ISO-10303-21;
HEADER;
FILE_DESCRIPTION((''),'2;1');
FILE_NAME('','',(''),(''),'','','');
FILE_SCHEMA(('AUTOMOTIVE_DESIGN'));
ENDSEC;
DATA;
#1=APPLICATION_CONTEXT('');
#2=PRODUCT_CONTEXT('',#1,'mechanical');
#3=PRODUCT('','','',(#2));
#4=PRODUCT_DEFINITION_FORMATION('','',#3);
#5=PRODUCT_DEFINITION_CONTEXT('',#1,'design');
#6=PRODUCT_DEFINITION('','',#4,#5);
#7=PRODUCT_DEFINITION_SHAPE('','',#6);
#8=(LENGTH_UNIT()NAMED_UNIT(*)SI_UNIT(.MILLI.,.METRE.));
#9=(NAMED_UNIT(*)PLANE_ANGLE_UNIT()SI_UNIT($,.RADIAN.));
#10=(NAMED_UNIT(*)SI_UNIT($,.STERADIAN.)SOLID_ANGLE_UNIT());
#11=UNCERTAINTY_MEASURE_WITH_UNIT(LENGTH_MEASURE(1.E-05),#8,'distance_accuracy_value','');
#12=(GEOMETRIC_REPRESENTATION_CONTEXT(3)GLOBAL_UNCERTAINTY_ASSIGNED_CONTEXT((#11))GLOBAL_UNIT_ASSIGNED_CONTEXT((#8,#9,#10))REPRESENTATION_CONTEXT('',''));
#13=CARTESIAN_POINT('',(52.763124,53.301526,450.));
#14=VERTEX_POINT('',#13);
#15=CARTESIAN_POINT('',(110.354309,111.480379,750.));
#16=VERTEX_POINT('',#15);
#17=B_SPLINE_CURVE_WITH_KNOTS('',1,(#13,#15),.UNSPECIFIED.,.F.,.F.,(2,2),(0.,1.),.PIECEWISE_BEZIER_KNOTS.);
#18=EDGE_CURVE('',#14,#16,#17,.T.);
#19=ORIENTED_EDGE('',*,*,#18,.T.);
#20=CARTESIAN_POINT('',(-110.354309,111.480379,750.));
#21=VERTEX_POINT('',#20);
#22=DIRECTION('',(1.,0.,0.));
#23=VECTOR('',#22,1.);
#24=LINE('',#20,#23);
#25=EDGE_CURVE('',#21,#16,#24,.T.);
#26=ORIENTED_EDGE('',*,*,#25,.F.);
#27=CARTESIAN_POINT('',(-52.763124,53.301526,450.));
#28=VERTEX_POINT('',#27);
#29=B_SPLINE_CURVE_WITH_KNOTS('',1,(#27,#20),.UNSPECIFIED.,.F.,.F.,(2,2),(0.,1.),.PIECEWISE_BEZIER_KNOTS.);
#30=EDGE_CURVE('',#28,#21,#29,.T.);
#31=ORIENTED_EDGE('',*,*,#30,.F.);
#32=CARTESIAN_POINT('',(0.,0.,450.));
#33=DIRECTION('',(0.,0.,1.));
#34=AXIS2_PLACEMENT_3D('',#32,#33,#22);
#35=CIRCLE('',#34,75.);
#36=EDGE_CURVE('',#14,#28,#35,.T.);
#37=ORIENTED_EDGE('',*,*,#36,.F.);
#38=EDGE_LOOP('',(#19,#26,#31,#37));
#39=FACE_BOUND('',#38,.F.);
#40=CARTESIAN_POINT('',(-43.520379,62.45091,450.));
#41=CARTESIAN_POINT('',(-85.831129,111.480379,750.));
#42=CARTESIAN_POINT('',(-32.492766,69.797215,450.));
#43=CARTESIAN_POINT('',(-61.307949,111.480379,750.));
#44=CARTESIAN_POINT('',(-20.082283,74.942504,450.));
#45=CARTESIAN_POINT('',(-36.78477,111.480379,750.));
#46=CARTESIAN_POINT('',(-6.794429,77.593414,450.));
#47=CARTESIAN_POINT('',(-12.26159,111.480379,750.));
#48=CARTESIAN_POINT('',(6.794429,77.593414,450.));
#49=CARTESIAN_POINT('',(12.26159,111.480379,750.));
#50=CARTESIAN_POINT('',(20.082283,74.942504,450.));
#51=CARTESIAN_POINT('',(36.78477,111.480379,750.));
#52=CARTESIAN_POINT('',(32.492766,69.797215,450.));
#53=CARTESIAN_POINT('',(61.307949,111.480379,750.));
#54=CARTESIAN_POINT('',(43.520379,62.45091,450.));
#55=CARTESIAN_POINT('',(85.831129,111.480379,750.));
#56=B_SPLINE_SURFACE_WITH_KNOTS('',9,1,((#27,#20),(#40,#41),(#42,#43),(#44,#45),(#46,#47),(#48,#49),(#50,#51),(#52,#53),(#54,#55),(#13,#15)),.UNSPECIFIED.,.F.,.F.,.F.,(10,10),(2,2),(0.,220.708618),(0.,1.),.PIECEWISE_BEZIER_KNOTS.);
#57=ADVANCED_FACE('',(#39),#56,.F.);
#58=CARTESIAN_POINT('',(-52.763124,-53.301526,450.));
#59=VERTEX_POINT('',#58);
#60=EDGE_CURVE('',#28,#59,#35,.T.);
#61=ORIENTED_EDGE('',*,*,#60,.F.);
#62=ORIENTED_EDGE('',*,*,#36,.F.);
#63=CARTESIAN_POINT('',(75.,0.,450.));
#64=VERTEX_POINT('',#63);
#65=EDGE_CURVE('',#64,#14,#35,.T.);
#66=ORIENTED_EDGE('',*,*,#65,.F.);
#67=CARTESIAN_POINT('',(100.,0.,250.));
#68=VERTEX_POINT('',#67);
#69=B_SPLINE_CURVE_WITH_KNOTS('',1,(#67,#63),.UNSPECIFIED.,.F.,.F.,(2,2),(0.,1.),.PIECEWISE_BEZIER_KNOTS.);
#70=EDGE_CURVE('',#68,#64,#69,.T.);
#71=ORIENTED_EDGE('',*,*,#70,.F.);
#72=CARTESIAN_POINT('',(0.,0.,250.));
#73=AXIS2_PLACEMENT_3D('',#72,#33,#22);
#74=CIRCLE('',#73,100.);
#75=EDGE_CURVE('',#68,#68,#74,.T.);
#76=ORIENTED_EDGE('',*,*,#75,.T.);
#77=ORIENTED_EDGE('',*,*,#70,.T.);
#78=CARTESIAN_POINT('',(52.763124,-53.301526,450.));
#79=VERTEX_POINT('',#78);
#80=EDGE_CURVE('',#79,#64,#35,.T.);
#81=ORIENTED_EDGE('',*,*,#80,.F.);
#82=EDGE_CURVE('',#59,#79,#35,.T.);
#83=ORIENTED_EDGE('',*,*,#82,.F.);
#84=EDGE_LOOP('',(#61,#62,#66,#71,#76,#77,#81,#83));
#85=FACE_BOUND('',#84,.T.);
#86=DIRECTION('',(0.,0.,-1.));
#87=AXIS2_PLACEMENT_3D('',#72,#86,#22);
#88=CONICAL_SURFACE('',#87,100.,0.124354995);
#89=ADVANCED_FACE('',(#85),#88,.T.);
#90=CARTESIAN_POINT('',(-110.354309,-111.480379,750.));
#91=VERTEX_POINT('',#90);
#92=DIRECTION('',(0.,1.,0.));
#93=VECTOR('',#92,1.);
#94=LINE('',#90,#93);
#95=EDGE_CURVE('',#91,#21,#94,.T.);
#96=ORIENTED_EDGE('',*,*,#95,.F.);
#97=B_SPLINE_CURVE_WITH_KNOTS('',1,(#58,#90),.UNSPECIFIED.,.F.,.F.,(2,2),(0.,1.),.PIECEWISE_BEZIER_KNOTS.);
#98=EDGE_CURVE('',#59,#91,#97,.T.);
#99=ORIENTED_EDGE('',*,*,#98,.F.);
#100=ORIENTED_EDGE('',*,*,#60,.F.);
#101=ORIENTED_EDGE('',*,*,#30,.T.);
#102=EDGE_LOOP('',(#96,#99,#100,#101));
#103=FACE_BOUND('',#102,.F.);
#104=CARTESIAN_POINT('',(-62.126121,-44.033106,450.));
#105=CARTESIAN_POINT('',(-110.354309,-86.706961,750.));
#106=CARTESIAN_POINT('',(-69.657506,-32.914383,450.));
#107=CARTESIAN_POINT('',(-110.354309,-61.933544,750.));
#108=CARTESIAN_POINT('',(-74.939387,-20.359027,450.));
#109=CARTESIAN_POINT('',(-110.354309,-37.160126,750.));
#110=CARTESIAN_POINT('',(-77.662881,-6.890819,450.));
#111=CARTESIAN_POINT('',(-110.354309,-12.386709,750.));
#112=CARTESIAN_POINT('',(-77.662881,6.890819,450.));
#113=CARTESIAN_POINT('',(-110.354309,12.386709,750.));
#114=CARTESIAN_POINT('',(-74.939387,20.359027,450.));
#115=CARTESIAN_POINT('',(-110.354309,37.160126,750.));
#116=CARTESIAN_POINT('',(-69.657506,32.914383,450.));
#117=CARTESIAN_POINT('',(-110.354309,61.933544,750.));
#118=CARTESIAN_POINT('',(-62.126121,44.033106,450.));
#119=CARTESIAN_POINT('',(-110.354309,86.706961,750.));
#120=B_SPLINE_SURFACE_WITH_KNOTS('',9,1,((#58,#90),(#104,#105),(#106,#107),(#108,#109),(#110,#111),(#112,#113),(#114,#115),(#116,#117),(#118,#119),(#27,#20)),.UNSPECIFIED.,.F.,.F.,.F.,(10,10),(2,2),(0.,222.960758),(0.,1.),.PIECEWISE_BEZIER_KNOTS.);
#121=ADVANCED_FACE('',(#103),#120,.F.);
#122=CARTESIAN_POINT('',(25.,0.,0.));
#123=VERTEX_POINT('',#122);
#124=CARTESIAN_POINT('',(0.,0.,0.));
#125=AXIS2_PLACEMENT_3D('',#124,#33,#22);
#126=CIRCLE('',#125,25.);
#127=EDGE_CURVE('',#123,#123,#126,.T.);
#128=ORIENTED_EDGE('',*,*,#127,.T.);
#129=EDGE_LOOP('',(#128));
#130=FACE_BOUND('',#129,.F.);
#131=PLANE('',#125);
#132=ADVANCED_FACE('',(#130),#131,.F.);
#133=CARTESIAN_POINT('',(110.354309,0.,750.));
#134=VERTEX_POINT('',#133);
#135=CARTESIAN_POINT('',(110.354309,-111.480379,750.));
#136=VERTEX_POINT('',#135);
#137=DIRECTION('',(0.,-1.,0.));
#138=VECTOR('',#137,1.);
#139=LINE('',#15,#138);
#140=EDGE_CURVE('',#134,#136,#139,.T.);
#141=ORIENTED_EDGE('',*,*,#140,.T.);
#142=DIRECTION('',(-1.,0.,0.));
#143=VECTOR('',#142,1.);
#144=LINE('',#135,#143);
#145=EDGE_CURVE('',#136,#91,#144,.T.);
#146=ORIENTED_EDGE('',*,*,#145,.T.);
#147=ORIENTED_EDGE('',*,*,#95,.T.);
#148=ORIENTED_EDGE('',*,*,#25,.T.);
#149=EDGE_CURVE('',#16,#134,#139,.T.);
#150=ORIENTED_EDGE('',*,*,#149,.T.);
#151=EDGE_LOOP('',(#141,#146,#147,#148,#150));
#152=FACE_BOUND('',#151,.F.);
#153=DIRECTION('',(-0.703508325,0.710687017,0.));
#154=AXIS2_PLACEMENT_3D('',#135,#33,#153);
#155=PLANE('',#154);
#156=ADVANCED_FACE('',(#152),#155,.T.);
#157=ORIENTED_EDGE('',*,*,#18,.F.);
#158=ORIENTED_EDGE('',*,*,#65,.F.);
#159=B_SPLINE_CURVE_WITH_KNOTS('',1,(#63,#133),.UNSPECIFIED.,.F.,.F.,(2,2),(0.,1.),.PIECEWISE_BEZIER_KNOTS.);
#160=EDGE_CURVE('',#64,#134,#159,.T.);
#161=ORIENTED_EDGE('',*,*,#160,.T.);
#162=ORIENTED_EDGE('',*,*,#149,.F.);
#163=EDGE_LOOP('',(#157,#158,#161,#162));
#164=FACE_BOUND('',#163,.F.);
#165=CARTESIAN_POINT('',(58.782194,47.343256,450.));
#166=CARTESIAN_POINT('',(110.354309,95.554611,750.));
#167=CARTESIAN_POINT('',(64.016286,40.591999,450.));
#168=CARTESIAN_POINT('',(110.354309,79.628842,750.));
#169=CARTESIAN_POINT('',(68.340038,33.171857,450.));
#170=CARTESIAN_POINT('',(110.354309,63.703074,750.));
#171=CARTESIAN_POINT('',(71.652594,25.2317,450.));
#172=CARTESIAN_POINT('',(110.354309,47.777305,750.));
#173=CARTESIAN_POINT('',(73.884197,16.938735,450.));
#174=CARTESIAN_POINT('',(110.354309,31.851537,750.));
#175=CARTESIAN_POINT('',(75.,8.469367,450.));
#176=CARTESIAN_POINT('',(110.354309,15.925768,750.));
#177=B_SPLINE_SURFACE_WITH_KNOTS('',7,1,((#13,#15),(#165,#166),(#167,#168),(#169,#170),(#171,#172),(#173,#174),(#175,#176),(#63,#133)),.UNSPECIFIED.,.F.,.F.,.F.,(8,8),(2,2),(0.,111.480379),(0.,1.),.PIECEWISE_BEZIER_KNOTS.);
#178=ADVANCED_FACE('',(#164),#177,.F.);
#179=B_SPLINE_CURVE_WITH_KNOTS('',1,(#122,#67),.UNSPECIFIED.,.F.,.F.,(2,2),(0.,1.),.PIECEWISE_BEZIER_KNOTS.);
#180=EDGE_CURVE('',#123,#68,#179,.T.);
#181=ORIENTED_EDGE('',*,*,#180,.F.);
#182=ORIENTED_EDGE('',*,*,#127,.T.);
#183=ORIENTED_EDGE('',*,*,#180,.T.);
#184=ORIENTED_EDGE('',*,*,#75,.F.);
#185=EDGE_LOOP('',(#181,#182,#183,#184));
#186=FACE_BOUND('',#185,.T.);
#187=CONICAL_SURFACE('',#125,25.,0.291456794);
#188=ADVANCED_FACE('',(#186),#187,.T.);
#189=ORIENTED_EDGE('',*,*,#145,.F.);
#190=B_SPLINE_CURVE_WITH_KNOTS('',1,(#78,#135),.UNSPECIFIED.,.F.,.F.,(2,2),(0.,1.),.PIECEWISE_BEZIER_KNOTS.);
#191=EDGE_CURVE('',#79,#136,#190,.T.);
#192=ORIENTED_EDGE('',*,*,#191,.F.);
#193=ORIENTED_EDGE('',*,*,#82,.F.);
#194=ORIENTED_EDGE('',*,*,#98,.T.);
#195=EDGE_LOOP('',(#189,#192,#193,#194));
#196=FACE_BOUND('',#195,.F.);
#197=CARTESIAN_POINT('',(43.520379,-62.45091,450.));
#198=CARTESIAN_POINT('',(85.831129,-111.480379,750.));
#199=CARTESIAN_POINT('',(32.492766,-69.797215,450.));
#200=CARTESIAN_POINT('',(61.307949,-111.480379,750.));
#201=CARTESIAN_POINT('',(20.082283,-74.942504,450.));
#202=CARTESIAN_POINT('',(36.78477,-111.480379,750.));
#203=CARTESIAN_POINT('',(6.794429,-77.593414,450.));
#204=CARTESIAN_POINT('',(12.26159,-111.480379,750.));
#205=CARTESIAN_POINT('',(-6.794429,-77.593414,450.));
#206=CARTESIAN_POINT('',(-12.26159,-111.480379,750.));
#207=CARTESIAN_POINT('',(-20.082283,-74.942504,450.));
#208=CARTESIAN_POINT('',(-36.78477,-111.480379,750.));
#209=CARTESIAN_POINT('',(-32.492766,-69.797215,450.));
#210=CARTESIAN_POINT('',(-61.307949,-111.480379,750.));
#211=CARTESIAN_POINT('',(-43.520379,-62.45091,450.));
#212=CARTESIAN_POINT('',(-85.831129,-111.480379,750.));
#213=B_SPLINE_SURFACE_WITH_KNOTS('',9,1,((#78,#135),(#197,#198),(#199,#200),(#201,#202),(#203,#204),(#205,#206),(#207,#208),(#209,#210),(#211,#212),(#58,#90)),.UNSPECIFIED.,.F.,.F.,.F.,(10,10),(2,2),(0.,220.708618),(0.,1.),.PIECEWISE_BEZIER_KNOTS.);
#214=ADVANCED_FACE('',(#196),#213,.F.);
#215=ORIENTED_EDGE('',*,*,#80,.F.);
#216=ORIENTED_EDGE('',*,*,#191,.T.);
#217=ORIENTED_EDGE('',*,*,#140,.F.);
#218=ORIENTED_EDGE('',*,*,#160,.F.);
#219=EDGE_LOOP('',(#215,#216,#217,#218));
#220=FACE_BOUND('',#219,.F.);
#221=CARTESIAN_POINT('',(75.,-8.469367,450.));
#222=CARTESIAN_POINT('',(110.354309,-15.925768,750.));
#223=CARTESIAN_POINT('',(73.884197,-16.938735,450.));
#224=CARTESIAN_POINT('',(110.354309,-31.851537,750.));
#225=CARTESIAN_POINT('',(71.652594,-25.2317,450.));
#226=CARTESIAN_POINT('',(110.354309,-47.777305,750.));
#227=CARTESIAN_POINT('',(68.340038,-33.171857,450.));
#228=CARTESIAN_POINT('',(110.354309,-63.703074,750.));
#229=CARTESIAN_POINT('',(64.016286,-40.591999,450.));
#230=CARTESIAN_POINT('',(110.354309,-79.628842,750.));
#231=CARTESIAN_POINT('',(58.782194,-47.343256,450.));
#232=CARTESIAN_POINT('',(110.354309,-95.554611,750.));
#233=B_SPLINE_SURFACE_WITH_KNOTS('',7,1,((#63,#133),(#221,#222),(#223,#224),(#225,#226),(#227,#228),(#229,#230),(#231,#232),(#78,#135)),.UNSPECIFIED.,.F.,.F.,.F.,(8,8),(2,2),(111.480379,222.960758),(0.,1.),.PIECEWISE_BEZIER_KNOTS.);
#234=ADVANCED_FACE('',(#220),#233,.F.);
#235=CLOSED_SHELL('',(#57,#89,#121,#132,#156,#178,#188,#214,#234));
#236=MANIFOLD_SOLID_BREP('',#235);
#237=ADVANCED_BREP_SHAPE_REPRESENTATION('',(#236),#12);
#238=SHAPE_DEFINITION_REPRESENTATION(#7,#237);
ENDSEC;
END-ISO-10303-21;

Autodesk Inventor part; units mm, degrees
ref_plane "YZ Plane" through (0, 0, 0) normal (1, 0, 0) x (0, 1, 0)
ref_plane "XZ Plane" through (0, 0, 0) normal (0, 1, 0) x (-1, 0, 0)
sketch "Sketch1" plane through (0, 0, 0) normal (0, 0, 1) x (1, 0, 0)
  circle A0 centre (0, 0) radius 25
  dimension "d0" = 50
ref_plane "Work Plane1" through (0, 0, 250) normal (0, 0, 1) x (1, 0, 0)
sketch "Sketch2" plane through (0, 0, 250) normal (0, 0, 1) x (1, 0, 0)
  circle A0 centre (0, 0) radius 100
  line L0 (0, 0) -> (0, -169.491589)
  line L1 (-100, 0) -> (-100, -163.22364)
  dimension "d2" = 200
sketch "Sketch1 outline for Loft1" plane through (0, 0, 0) normal (0, 0, 1) x (1, 0, 0)
  circle A0 centre (0, 0) radius 25
sketch "Sketch2 outline for Loft1" plane through (0, 0, 250) normal (0, 0, 1) x (1, 0, 0)
  circle A0 centre (0, 0) radius 100
loft "Loft1" add profiles "Sketch1 outline for Loft1", "Sketch2 outline for Loft1"
ref_plane "Work Plane6" through (0, 0, 450) normal (0, 0, 1) x (1, 0, 0)
sketch "Sketch7" plane through (0, 0, 450) normal (0, 0, 1) x (1, 0, 0)
  circle A0 centre (0, 0) radius 75
  dimension "d15" = 150
sketch "Sketch7 outline for Loft2" plane through (0, 0, 450) normal (0, 0, 1) x (1, 0, 0)
  circle A0 centre (0, 0) radius 75
loft "Loft2" add profiles "Sketch7 outline for Loft2" section 1 edges at (-100, 0, 250)
ref_plane "Work Plane7" through (0, 0, 750) normal (0, 0, 1) x (1, 0, 0)
sketch "Sketch8" plane through (0, 0, 750) normal (0, 0, 1) x (1, 0, 0)
  line L0 (110.354309, -111.480379) -> (-110.354309, -111.480379)
  line L1 (-110.354309, -111.480379) -> (-110.354309, 111.480379)
  line L2 (-110.354309, 111.480379) -> (110.354309, 111.480379)
  line L3 (110.354309, 111.480379) -> (110.354309, -111.480379)
  line L4 (110.354309, -111.480379) -> (-110.354309, 111.480379) construction
  line L5 (-110.354309, -111.480379) -> (110.354309, 111.480379) construction
  point P0 (0, 0)
sketch "Sketch8 outline for Loft3" plane through (0, 0, 750) normal (0, 0, 1) x (1, 0, 0)
  line L0 (110.354309, -111.480379) -> (-110.354309, -111.480379)
  line L1 (-110.354309, -111.480379) -> (-110.354309, 111.480379)
  line L2 (-110.354309, 111.480379) -> (110.354309, 111.480379)
  line L3 (110.354309, 111.480379) -> (110.354309, -111.480379)
loft "Loft3" add profiles "Sketch8 outline for Loft3" section 1 edges at (-75, 0, 450)
properties part number "PartOne"
